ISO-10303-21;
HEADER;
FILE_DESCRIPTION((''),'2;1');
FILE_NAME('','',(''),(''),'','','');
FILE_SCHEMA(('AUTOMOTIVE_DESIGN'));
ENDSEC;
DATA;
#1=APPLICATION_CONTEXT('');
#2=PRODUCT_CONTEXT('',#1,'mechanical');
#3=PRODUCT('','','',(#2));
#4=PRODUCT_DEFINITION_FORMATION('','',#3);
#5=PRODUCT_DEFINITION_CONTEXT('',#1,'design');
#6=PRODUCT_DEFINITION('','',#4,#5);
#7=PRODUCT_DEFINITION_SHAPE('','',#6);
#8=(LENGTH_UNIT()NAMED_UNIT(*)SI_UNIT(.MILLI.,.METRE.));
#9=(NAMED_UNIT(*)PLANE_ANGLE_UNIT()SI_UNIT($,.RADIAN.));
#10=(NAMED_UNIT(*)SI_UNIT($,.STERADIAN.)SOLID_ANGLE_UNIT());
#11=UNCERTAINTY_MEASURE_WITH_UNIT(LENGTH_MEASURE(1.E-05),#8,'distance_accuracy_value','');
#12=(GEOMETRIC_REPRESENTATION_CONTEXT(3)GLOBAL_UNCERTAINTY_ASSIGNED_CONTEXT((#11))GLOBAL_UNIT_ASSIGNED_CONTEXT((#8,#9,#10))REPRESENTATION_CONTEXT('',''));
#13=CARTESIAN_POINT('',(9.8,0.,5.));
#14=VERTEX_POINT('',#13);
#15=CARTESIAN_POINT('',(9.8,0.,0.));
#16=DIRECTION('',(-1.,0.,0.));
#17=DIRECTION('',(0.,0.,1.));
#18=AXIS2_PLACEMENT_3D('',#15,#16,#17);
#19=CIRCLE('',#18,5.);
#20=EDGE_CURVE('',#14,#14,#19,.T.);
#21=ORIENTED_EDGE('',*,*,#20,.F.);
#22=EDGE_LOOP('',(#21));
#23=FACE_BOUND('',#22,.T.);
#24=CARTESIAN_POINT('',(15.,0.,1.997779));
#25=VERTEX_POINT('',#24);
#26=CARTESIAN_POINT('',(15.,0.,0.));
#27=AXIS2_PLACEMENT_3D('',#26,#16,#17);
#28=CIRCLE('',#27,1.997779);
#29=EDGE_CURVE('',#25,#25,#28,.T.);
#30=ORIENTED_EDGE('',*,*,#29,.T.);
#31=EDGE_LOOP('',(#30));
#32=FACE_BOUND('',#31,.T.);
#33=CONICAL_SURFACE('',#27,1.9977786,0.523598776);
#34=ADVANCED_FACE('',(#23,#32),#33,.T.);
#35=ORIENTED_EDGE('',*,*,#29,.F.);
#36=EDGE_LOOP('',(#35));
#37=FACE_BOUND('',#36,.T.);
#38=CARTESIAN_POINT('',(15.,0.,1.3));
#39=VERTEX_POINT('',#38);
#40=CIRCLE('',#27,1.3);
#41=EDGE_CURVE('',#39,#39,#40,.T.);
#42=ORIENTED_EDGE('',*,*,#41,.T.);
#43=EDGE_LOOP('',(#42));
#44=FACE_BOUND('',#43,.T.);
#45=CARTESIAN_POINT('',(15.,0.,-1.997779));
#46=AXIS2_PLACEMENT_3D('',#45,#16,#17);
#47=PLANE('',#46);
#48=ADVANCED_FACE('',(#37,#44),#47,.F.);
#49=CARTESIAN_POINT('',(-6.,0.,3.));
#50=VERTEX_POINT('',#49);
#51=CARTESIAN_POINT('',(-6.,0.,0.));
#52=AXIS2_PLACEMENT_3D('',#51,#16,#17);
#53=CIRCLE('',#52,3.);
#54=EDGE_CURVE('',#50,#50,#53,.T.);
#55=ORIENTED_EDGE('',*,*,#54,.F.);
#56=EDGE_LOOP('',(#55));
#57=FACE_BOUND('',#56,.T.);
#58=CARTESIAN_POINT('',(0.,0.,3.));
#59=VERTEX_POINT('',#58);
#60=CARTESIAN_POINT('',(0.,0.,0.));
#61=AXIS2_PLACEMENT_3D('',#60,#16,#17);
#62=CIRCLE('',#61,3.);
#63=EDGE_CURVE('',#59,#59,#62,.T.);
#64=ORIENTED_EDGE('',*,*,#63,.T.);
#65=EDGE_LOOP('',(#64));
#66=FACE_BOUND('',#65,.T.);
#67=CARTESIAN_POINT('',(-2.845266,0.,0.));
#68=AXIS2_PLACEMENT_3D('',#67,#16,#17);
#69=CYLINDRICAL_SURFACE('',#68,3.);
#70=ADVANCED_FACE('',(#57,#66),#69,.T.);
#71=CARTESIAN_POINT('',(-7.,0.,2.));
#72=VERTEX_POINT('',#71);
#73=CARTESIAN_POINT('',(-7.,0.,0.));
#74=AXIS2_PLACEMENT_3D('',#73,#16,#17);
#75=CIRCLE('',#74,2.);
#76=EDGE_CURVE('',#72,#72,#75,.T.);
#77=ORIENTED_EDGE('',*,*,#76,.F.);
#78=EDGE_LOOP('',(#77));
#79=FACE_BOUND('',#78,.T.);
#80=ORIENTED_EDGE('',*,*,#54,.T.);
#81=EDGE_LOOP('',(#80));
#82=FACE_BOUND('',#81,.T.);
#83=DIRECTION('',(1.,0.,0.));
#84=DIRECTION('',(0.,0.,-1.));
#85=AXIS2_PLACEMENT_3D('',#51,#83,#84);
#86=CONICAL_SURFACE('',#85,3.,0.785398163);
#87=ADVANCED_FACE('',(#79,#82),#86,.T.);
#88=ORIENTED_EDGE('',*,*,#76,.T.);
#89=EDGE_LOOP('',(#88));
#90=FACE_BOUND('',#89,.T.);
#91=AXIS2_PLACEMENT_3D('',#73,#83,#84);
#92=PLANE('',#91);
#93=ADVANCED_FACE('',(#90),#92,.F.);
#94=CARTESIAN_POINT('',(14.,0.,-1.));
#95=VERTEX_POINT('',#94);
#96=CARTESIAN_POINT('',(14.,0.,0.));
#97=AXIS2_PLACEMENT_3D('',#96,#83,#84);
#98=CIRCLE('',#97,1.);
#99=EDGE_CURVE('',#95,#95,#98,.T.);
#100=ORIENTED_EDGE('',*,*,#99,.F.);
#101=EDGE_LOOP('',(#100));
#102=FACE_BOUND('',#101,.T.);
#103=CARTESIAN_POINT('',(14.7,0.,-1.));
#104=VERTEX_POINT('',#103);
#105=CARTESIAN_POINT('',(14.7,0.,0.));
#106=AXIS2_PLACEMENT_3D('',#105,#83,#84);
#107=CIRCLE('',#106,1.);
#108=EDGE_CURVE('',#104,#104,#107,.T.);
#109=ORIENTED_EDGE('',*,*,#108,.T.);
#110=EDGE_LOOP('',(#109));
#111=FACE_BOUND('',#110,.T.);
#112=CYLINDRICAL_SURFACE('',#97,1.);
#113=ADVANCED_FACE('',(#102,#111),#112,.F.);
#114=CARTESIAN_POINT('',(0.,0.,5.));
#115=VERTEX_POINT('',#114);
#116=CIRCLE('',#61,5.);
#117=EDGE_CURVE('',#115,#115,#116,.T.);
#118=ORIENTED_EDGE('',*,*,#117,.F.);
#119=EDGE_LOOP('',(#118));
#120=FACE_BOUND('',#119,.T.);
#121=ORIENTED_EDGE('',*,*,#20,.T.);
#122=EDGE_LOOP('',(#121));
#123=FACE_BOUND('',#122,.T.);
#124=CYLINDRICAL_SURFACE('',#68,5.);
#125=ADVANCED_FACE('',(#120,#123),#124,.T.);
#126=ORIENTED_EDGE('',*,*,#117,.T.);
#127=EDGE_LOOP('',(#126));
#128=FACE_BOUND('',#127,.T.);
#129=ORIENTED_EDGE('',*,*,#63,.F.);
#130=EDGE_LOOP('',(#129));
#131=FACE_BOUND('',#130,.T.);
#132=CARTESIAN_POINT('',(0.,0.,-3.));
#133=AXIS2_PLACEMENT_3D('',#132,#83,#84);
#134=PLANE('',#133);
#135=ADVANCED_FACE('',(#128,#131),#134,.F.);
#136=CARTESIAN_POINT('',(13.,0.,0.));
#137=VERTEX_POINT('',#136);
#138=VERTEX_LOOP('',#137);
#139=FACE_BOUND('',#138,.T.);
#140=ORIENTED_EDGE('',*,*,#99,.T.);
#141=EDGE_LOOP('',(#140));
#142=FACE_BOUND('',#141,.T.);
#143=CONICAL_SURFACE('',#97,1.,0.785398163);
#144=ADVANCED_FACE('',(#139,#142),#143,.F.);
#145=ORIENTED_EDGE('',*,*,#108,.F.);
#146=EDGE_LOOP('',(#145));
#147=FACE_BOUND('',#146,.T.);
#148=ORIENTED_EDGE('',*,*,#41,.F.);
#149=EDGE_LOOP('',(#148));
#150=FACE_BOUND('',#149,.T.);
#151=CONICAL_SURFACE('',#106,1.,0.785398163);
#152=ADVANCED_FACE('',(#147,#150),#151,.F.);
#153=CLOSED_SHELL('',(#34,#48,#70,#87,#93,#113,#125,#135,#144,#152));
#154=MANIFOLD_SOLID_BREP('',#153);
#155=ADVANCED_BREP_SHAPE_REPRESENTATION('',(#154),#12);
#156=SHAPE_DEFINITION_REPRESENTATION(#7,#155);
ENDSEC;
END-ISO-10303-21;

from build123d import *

# Parameters (mm, degrees)
SKETCH2_R          = 1
CUT_EXTRUDE1_DEPTH = 0.3
CHAMFER1_SIZE      = 0.3
SKETCH3_R          = 1
CUT_EXTRUDE2_DEPTH = 0.7


with BuildPart() as part:
    # Sketch1 → Revolve1 (revolve)
    with BuildSketch(Plane(origin=(0, 0, 0), x_dir=(1, 0, 0), z_dir=(0, 1, 0)), mode=Mode.PRIVATE) as revolve1_sk:
        Polygon((-7, 0), (-7, 2), (-6, 3), (0, 3), (0, 5), (9.8, 5), (15, 1.9977786), (15, 0), align=None)
    revolve(revolve1_sk.sketch.rotate(Axis((-2.845265589, 0, 0), (1, 0, 0)), 180), axis=Axis((-2.845265589, 0, 0), (1, 0, 0)))

    # Sketch2 → Cut-Extrude1 (cut)
    with BuildSketch(Plane(origin=(15, 0, 0), x_dir=(0, 0, -1), z_dir=(1, 0, 0))):
        Circle(SKETCH2_R)
    extrude(amount=-CUT_EXTRUDE1_DEPTH, mode=Mode.SUBTRACT)

    # Chamfer1
    chamfer1_edges = [part.edges().sort_by_distance(p)[0] for p in [
        (15, 0, 1),
    ]]
    chamfer(chamfer1_edges, length=CHAMFER1_SIZE - 0.0001)  # a hair under: the kernel refuses the full size

    # Sketch3 → Cut-Extrude2 (cut)
    with BuildSketch(Plane(origin=(14.7, 0, 0), x_dir=(0, 0, -1), z_dir=(1, 0, 0))):
        Circle(SKETCH3_R)
    extrude(amount=-CUT_EXTRUDE2_DEPTH, mode=Mode.SUBTRACT)

    # Cut-Extrude3 cone 1 section (through the dimple's axis) → Cut-Extrude3 (revolve, cut)
    with BuildSketch(Plane(origin=(14, 0, 0), x_dir=(0, 0, -1), z_dir=(0, 1, 0))):
        Polygon((0, 0), (1, 0), (0, 1), align=None)
    revolve(axis=Axis((14, 0, 0), (-1, 0, 0)), mode=Mode.SUBTRACT)


solid = part.part
